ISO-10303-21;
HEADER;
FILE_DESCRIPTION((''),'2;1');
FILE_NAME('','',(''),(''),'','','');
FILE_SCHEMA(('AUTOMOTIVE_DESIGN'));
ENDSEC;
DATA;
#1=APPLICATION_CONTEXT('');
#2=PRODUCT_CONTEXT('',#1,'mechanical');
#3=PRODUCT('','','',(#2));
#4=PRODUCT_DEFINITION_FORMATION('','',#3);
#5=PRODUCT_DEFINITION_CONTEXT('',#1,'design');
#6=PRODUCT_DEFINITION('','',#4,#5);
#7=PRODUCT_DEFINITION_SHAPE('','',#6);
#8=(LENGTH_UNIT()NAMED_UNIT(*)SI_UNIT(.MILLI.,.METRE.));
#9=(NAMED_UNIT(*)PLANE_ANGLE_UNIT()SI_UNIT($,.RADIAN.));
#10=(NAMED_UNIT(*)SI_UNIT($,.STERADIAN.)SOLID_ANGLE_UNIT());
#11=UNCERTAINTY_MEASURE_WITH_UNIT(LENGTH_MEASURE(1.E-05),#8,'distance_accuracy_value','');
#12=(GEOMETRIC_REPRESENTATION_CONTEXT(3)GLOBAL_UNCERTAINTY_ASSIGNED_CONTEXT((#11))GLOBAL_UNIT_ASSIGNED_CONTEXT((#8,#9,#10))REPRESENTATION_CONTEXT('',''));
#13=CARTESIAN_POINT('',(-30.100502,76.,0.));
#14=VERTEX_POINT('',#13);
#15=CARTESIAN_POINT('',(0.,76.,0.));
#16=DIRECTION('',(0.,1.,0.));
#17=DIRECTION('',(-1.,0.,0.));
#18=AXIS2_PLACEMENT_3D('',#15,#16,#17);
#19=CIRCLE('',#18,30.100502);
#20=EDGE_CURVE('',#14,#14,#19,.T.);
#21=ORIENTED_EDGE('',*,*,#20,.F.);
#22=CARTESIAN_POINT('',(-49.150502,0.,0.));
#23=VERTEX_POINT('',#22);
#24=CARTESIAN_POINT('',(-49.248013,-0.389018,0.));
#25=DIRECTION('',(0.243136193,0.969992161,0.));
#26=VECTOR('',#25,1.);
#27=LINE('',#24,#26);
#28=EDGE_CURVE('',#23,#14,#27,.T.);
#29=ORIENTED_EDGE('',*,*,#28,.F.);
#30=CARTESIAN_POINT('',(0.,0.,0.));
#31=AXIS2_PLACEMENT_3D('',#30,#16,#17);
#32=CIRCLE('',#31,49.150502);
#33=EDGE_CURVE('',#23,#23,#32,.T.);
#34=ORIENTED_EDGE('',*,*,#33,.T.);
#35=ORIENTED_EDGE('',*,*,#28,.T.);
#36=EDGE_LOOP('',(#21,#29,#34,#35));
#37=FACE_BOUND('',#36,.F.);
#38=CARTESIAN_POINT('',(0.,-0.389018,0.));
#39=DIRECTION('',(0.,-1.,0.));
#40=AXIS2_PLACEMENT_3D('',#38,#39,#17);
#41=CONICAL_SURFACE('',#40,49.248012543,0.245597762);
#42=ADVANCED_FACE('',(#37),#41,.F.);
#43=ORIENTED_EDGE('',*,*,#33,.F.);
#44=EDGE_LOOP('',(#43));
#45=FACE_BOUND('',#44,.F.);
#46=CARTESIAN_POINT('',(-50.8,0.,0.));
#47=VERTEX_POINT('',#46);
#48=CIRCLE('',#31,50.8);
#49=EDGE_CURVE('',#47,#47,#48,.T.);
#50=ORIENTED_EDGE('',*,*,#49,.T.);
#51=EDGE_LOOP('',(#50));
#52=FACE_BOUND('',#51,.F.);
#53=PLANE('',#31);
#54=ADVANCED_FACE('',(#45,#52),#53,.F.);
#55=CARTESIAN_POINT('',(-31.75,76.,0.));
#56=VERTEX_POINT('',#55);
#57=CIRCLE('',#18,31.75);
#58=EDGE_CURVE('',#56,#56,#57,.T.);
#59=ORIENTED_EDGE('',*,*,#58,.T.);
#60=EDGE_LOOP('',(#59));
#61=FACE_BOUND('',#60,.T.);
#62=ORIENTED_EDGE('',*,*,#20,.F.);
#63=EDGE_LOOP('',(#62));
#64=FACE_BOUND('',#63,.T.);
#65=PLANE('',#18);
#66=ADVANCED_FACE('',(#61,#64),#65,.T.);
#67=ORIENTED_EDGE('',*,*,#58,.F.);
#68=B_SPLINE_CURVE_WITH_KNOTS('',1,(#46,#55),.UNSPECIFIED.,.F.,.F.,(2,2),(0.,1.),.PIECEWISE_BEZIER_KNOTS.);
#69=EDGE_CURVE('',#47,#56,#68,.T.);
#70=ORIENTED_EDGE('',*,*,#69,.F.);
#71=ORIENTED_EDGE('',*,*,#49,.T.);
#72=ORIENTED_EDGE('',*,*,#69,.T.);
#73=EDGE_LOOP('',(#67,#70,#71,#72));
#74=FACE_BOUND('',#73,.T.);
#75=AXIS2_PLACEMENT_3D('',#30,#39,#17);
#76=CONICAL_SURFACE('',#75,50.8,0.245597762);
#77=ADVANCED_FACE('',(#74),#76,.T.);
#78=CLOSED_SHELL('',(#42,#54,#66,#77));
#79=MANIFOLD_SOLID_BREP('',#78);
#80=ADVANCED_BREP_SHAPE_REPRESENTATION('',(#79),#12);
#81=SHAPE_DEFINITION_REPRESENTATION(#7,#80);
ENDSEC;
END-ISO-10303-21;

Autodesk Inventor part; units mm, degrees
ref_plane "YZ Plane" through (0, 0, 0) normal (1, 0, 0) x (0, 1, 0)
ref_plane "XY Plane" through (0, 0, 0) normal (0, 0, 1) x (1, 0, 0)
sketch "Szkic6" plane through (0, 0, 0) normal (0, 1, 0) x (-1, 0, 0)
  circle A0 centre (0, 0) radius 50.8
  dimension "d33" = 101.6
ref_plane "Płaszczyzna konstrukcyjna1" through (0, 76, 0) normal (0, 1, 0) x (-1, 0, 0)
sketch "Szkic7" plane through (0, 76, 0) normal (0, 1, 0) x (-1, 0, 0)
  circle A0 centre (0, 0) radius 31.75
  dimension "d35" = 63.5
loft "Wyciągnięcie złożone1" add profiles "Szkic6", "Szkic7"
shell "Skorupa1" thickness 1.6 removed faces 2 at (14.3997, 76, 5.5289) at (7.3018, 0, 11.5135)
equation "\"d33\" = OD1"
equation "\"d35\" = OD2"
equation "\"d52\" = THK"
equation "\"SzerokośćGięciaPodcięcia\" = Grubość"
equation "\"RozmiarPodcięciaNarożnika\" = 4 * Grubość"
equation "\"PromieńPrzejścia\" = PromieńGięcia"
equation "\"Rozmiar_promienia_Jacobiego\" = PromieńGięcia"
equation "\"Wielk_odstępu\" = Grubość"
equation "\"d2\" = PromieńGięcia"
equation "\"d23\" = PromieńGięcia"
equation "\"OD1\" = 101.6"
equation "\"OD2\" = 63.5"
equation "\"L\" = 76"
equation "\"THK\" = 1.6"
equation "\"d34\" = L"
equation "\"Grubość\" = 1.5"
equation "\"PromieńGięcia\" = 3"
properties part number "Redukcja symetryczna Ø101,6x63,5x1,6 L=76" material "304"
